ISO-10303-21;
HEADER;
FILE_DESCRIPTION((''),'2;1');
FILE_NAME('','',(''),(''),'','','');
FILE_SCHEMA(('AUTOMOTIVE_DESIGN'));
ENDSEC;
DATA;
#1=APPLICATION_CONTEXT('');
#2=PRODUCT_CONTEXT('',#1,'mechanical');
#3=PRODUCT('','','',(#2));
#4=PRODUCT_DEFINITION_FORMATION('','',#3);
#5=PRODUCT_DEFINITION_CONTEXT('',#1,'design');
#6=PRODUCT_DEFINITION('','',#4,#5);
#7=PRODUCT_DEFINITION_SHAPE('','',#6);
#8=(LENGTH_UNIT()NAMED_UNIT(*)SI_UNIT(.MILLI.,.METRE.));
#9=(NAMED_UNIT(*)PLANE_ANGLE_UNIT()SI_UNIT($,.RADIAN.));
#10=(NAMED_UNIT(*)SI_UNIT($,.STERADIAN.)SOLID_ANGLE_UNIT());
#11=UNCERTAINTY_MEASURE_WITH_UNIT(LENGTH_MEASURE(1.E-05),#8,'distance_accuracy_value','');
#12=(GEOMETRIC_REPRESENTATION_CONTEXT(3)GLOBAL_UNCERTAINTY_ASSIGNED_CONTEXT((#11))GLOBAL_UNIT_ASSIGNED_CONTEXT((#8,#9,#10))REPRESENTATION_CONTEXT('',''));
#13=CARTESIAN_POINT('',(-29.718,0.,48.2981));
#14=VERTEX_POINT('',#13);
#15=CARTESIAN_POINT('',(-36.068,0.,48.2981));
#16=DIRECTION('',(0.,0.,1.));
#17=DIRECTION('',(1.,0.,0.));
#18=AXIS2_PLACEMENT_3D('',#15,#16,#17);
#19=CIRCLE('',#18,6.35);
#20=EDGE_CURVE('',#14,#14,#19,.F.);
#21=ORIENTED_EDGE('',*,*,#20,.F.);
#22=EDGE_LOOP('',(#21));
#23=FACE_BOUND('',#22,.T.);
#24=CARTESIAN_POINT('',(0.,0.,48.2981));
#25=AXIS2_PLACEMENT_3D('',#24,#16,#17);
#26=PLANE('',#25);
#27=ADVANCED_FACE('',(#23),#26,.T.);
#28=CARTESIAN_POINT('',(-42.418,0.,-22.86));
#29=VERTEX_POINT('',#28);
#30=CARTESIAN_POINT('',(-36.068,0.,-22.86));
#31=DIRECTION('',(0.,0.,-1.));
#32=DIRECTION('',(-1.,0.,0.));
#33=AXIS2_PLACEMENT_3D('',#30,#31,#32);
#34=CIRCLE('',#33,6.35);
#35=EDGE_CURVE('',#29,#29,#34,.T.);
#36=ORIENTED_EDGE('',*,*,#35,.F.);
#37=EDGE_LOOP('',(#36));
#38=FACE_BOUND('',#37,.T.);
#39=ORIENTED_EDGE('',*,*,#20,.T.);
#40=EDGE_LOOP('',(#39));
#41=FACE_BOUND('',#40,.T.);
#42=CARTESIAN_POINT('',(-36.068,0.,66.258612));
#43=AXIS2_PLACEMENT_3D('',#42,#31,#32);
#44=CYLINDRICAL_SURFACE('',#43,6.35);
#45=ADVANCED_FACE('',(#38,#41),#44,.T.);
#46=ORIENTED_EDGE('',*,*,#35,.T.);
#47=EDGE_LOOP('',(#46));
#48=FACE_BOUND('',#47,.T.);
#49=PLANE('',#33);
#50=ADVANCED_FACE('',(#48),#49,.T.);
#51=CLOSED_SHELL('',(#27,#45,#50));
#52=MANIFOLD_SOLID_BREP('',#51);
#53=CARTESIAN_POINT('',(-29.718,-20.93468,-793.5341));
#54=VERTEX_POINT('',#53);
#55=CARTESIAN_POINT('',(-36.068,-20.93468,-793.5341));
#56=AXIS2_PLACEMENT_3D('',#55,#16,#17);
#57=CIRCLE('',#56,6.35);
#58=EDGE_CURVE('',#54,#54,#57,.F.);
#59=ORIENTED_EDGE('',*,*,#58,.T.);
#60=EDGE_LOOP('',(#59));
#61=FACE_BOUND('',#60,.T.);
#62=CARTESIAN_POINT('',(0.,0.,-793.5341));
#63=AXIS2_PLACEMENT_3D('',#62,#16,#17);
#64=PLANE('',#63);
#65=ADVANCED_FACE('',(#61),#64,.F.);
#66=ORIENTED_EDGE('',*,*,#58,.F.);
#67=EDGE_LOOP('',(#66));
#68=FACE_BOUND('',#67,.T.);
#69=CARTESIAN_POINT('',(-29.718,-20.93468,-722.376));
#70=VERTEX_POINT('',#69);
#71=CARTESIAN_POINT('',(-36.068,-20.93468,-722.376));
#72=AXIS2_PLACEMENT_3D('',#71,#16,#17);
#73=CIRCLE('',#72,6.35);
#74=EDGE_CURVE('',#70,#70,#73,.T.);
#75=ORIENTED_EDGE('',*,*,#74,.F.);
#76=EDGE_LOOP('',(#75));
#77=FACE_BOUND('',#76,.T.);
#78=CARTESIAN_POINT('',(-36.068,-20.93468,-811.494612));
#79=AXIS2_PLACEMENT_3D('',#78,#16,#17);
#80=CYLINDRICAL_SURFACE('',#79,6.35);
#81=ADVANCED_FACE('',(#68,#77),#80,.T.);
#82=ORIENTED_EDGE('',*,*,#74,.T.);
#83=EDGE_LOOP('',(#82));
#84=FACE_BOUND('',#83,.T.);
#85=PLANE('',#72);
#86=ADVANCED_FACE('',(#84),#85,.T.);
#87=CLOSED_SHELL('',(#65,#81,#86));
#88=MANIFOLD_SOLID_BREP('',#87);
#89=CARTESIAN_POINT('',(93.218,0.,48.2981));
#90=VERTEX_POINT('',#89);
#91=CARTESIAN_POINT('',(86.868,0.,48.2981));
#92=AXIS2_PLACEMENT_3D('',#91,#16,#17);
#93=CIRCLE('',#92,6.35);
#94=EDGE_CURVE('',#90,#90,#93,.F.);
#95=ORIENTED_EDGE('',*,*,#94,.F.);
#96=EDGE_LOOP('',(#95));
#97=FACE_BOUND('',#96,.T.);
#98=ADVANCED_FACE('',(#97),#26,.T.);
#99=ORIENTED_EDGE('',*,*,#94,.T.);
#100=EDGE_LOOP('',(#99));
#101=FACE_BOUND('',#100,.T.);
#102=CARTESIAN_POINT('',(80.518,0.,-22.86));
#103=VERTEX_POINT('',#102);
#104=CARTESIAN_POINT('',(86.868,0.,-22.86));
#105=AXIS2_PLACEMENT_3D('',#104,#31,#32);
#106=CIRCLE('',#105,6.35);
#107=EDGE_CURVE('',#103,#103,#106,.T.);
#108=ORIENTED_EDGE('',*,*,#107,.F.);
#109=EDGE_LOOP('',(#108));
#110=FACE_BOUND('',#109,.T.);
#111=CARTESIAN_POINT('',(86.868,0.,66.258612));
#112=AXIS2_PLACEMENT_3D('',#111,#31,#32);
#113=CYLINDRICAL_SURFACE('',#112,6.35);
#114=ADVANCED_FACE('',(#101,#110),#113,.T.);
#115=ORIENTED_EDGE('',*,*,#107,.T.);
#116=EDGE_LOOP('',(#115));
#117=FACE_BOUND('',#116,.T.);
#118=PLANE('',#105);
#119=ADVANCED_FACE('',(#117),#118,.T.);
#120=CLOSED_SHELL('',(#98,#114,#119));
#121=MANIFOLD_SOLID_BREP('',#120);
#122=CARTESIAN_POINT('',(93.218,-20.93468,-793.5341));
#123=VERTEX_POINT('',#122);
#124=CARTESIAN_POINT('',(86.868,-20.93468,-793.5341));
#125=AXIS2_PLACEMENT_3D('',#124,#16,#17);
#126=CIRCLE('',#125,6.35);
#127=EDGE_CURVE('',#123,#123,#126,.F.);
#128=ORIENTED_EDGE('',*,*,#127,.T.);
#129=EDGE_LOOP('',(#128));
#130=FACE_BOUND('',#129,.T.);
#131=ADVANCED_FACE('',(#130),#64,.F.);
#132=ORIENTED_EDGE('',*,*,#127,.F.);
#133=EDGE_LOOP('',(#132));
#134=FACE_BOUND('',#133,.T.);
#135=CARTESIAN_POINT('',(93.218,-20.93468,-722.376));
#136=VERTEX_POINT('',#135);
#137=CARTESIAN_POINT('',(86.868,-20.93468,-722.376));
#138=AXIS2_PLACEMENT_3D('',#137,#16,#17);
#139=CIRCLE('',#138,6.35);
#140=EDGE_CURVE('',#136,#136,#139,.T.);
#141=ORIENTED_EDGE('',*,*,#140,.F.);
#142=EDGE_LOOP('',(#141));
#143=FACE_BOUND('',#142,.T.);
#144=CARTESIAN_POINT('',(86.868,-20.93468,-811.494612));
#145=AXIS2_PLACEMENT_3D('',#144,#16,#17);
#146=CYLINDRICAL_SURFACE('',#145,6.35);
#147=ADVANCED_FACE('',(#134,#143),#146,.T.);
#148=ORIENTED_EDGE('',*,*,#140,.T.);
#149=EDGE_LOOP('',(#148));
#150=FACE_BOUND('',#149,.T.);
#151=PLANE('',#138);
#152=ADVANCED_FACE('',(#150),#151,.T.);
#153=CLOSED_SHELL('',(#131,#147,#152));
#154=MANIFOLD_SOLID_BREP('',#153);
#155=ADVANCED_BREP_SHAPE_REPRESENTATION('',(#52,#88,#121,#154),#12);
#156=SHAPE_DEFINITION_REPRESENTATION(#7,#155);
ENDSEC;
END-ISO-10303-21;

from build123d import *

# Parameters (mm, degrees)
BOSS_EXTRUDE1_START     = -71.1581
BOSS_EXTRUDE1_OUTLINE_R = 6.35
BOSS_EXTRUDE1_DEPTH     = 71.1581
SKETCH3_R               = 6.35
BOSS_EXTRUDE2_DEPTH     = 71.1581
BOSS_EXTRUDE2_2_DEPTH   = 71.1581


# Read off the part's stored shape, not the designer's step: Boss-Extrude1
with BuildPart() as part:
    # Boss-Extrude1 outline → Boss-Extrude1 (new body)
    with BuildSketch(Plane.XY.offset(-722.376).offset(BOSS_EXTRUDE1_START)):
        with Locations((86.868, -20.93468)):
            Circle(BOSS_EXTRUDE1_OUTLINE_R)
        with Locations((-36.068, -20.93468)):
            Circle(BOSS_EXTRUDE1_OUTLINE_R)
    extrude(amount=BOSS_EXTRUDE1_DEPTH)


with BuildPart() as body_2:
    # Sketch3 → Boss-Extrude2 (new body)
    with BuildSketch(Plane(origin=(0, 0, -22.86), x_dir=(-1, 0, 0), z_dir=(0, 0, -1))):
        with Locations((36.068, 0)):
            Circle(SKETCH3_R)
    extrude(amount=-BOSS_EXTRUDE2_DEPTH)


with BuildPart() as body_3:
    # Sketch3 → Boss-Extrude2 2 (new body)
    with BuildSketch(Plane(origin=(0, 0, -22.86), x_dir=(-1, 0, 0), z_dir=(0, 0, -1))):
        with Locations((-86.868, 0)):
            Circle(SKETCH3_R)
    extrude(amount=-BOSS_EXTRUDE2_2_DEPTH)


solid = Compound([part.part, body_2.part, body_3.part])
